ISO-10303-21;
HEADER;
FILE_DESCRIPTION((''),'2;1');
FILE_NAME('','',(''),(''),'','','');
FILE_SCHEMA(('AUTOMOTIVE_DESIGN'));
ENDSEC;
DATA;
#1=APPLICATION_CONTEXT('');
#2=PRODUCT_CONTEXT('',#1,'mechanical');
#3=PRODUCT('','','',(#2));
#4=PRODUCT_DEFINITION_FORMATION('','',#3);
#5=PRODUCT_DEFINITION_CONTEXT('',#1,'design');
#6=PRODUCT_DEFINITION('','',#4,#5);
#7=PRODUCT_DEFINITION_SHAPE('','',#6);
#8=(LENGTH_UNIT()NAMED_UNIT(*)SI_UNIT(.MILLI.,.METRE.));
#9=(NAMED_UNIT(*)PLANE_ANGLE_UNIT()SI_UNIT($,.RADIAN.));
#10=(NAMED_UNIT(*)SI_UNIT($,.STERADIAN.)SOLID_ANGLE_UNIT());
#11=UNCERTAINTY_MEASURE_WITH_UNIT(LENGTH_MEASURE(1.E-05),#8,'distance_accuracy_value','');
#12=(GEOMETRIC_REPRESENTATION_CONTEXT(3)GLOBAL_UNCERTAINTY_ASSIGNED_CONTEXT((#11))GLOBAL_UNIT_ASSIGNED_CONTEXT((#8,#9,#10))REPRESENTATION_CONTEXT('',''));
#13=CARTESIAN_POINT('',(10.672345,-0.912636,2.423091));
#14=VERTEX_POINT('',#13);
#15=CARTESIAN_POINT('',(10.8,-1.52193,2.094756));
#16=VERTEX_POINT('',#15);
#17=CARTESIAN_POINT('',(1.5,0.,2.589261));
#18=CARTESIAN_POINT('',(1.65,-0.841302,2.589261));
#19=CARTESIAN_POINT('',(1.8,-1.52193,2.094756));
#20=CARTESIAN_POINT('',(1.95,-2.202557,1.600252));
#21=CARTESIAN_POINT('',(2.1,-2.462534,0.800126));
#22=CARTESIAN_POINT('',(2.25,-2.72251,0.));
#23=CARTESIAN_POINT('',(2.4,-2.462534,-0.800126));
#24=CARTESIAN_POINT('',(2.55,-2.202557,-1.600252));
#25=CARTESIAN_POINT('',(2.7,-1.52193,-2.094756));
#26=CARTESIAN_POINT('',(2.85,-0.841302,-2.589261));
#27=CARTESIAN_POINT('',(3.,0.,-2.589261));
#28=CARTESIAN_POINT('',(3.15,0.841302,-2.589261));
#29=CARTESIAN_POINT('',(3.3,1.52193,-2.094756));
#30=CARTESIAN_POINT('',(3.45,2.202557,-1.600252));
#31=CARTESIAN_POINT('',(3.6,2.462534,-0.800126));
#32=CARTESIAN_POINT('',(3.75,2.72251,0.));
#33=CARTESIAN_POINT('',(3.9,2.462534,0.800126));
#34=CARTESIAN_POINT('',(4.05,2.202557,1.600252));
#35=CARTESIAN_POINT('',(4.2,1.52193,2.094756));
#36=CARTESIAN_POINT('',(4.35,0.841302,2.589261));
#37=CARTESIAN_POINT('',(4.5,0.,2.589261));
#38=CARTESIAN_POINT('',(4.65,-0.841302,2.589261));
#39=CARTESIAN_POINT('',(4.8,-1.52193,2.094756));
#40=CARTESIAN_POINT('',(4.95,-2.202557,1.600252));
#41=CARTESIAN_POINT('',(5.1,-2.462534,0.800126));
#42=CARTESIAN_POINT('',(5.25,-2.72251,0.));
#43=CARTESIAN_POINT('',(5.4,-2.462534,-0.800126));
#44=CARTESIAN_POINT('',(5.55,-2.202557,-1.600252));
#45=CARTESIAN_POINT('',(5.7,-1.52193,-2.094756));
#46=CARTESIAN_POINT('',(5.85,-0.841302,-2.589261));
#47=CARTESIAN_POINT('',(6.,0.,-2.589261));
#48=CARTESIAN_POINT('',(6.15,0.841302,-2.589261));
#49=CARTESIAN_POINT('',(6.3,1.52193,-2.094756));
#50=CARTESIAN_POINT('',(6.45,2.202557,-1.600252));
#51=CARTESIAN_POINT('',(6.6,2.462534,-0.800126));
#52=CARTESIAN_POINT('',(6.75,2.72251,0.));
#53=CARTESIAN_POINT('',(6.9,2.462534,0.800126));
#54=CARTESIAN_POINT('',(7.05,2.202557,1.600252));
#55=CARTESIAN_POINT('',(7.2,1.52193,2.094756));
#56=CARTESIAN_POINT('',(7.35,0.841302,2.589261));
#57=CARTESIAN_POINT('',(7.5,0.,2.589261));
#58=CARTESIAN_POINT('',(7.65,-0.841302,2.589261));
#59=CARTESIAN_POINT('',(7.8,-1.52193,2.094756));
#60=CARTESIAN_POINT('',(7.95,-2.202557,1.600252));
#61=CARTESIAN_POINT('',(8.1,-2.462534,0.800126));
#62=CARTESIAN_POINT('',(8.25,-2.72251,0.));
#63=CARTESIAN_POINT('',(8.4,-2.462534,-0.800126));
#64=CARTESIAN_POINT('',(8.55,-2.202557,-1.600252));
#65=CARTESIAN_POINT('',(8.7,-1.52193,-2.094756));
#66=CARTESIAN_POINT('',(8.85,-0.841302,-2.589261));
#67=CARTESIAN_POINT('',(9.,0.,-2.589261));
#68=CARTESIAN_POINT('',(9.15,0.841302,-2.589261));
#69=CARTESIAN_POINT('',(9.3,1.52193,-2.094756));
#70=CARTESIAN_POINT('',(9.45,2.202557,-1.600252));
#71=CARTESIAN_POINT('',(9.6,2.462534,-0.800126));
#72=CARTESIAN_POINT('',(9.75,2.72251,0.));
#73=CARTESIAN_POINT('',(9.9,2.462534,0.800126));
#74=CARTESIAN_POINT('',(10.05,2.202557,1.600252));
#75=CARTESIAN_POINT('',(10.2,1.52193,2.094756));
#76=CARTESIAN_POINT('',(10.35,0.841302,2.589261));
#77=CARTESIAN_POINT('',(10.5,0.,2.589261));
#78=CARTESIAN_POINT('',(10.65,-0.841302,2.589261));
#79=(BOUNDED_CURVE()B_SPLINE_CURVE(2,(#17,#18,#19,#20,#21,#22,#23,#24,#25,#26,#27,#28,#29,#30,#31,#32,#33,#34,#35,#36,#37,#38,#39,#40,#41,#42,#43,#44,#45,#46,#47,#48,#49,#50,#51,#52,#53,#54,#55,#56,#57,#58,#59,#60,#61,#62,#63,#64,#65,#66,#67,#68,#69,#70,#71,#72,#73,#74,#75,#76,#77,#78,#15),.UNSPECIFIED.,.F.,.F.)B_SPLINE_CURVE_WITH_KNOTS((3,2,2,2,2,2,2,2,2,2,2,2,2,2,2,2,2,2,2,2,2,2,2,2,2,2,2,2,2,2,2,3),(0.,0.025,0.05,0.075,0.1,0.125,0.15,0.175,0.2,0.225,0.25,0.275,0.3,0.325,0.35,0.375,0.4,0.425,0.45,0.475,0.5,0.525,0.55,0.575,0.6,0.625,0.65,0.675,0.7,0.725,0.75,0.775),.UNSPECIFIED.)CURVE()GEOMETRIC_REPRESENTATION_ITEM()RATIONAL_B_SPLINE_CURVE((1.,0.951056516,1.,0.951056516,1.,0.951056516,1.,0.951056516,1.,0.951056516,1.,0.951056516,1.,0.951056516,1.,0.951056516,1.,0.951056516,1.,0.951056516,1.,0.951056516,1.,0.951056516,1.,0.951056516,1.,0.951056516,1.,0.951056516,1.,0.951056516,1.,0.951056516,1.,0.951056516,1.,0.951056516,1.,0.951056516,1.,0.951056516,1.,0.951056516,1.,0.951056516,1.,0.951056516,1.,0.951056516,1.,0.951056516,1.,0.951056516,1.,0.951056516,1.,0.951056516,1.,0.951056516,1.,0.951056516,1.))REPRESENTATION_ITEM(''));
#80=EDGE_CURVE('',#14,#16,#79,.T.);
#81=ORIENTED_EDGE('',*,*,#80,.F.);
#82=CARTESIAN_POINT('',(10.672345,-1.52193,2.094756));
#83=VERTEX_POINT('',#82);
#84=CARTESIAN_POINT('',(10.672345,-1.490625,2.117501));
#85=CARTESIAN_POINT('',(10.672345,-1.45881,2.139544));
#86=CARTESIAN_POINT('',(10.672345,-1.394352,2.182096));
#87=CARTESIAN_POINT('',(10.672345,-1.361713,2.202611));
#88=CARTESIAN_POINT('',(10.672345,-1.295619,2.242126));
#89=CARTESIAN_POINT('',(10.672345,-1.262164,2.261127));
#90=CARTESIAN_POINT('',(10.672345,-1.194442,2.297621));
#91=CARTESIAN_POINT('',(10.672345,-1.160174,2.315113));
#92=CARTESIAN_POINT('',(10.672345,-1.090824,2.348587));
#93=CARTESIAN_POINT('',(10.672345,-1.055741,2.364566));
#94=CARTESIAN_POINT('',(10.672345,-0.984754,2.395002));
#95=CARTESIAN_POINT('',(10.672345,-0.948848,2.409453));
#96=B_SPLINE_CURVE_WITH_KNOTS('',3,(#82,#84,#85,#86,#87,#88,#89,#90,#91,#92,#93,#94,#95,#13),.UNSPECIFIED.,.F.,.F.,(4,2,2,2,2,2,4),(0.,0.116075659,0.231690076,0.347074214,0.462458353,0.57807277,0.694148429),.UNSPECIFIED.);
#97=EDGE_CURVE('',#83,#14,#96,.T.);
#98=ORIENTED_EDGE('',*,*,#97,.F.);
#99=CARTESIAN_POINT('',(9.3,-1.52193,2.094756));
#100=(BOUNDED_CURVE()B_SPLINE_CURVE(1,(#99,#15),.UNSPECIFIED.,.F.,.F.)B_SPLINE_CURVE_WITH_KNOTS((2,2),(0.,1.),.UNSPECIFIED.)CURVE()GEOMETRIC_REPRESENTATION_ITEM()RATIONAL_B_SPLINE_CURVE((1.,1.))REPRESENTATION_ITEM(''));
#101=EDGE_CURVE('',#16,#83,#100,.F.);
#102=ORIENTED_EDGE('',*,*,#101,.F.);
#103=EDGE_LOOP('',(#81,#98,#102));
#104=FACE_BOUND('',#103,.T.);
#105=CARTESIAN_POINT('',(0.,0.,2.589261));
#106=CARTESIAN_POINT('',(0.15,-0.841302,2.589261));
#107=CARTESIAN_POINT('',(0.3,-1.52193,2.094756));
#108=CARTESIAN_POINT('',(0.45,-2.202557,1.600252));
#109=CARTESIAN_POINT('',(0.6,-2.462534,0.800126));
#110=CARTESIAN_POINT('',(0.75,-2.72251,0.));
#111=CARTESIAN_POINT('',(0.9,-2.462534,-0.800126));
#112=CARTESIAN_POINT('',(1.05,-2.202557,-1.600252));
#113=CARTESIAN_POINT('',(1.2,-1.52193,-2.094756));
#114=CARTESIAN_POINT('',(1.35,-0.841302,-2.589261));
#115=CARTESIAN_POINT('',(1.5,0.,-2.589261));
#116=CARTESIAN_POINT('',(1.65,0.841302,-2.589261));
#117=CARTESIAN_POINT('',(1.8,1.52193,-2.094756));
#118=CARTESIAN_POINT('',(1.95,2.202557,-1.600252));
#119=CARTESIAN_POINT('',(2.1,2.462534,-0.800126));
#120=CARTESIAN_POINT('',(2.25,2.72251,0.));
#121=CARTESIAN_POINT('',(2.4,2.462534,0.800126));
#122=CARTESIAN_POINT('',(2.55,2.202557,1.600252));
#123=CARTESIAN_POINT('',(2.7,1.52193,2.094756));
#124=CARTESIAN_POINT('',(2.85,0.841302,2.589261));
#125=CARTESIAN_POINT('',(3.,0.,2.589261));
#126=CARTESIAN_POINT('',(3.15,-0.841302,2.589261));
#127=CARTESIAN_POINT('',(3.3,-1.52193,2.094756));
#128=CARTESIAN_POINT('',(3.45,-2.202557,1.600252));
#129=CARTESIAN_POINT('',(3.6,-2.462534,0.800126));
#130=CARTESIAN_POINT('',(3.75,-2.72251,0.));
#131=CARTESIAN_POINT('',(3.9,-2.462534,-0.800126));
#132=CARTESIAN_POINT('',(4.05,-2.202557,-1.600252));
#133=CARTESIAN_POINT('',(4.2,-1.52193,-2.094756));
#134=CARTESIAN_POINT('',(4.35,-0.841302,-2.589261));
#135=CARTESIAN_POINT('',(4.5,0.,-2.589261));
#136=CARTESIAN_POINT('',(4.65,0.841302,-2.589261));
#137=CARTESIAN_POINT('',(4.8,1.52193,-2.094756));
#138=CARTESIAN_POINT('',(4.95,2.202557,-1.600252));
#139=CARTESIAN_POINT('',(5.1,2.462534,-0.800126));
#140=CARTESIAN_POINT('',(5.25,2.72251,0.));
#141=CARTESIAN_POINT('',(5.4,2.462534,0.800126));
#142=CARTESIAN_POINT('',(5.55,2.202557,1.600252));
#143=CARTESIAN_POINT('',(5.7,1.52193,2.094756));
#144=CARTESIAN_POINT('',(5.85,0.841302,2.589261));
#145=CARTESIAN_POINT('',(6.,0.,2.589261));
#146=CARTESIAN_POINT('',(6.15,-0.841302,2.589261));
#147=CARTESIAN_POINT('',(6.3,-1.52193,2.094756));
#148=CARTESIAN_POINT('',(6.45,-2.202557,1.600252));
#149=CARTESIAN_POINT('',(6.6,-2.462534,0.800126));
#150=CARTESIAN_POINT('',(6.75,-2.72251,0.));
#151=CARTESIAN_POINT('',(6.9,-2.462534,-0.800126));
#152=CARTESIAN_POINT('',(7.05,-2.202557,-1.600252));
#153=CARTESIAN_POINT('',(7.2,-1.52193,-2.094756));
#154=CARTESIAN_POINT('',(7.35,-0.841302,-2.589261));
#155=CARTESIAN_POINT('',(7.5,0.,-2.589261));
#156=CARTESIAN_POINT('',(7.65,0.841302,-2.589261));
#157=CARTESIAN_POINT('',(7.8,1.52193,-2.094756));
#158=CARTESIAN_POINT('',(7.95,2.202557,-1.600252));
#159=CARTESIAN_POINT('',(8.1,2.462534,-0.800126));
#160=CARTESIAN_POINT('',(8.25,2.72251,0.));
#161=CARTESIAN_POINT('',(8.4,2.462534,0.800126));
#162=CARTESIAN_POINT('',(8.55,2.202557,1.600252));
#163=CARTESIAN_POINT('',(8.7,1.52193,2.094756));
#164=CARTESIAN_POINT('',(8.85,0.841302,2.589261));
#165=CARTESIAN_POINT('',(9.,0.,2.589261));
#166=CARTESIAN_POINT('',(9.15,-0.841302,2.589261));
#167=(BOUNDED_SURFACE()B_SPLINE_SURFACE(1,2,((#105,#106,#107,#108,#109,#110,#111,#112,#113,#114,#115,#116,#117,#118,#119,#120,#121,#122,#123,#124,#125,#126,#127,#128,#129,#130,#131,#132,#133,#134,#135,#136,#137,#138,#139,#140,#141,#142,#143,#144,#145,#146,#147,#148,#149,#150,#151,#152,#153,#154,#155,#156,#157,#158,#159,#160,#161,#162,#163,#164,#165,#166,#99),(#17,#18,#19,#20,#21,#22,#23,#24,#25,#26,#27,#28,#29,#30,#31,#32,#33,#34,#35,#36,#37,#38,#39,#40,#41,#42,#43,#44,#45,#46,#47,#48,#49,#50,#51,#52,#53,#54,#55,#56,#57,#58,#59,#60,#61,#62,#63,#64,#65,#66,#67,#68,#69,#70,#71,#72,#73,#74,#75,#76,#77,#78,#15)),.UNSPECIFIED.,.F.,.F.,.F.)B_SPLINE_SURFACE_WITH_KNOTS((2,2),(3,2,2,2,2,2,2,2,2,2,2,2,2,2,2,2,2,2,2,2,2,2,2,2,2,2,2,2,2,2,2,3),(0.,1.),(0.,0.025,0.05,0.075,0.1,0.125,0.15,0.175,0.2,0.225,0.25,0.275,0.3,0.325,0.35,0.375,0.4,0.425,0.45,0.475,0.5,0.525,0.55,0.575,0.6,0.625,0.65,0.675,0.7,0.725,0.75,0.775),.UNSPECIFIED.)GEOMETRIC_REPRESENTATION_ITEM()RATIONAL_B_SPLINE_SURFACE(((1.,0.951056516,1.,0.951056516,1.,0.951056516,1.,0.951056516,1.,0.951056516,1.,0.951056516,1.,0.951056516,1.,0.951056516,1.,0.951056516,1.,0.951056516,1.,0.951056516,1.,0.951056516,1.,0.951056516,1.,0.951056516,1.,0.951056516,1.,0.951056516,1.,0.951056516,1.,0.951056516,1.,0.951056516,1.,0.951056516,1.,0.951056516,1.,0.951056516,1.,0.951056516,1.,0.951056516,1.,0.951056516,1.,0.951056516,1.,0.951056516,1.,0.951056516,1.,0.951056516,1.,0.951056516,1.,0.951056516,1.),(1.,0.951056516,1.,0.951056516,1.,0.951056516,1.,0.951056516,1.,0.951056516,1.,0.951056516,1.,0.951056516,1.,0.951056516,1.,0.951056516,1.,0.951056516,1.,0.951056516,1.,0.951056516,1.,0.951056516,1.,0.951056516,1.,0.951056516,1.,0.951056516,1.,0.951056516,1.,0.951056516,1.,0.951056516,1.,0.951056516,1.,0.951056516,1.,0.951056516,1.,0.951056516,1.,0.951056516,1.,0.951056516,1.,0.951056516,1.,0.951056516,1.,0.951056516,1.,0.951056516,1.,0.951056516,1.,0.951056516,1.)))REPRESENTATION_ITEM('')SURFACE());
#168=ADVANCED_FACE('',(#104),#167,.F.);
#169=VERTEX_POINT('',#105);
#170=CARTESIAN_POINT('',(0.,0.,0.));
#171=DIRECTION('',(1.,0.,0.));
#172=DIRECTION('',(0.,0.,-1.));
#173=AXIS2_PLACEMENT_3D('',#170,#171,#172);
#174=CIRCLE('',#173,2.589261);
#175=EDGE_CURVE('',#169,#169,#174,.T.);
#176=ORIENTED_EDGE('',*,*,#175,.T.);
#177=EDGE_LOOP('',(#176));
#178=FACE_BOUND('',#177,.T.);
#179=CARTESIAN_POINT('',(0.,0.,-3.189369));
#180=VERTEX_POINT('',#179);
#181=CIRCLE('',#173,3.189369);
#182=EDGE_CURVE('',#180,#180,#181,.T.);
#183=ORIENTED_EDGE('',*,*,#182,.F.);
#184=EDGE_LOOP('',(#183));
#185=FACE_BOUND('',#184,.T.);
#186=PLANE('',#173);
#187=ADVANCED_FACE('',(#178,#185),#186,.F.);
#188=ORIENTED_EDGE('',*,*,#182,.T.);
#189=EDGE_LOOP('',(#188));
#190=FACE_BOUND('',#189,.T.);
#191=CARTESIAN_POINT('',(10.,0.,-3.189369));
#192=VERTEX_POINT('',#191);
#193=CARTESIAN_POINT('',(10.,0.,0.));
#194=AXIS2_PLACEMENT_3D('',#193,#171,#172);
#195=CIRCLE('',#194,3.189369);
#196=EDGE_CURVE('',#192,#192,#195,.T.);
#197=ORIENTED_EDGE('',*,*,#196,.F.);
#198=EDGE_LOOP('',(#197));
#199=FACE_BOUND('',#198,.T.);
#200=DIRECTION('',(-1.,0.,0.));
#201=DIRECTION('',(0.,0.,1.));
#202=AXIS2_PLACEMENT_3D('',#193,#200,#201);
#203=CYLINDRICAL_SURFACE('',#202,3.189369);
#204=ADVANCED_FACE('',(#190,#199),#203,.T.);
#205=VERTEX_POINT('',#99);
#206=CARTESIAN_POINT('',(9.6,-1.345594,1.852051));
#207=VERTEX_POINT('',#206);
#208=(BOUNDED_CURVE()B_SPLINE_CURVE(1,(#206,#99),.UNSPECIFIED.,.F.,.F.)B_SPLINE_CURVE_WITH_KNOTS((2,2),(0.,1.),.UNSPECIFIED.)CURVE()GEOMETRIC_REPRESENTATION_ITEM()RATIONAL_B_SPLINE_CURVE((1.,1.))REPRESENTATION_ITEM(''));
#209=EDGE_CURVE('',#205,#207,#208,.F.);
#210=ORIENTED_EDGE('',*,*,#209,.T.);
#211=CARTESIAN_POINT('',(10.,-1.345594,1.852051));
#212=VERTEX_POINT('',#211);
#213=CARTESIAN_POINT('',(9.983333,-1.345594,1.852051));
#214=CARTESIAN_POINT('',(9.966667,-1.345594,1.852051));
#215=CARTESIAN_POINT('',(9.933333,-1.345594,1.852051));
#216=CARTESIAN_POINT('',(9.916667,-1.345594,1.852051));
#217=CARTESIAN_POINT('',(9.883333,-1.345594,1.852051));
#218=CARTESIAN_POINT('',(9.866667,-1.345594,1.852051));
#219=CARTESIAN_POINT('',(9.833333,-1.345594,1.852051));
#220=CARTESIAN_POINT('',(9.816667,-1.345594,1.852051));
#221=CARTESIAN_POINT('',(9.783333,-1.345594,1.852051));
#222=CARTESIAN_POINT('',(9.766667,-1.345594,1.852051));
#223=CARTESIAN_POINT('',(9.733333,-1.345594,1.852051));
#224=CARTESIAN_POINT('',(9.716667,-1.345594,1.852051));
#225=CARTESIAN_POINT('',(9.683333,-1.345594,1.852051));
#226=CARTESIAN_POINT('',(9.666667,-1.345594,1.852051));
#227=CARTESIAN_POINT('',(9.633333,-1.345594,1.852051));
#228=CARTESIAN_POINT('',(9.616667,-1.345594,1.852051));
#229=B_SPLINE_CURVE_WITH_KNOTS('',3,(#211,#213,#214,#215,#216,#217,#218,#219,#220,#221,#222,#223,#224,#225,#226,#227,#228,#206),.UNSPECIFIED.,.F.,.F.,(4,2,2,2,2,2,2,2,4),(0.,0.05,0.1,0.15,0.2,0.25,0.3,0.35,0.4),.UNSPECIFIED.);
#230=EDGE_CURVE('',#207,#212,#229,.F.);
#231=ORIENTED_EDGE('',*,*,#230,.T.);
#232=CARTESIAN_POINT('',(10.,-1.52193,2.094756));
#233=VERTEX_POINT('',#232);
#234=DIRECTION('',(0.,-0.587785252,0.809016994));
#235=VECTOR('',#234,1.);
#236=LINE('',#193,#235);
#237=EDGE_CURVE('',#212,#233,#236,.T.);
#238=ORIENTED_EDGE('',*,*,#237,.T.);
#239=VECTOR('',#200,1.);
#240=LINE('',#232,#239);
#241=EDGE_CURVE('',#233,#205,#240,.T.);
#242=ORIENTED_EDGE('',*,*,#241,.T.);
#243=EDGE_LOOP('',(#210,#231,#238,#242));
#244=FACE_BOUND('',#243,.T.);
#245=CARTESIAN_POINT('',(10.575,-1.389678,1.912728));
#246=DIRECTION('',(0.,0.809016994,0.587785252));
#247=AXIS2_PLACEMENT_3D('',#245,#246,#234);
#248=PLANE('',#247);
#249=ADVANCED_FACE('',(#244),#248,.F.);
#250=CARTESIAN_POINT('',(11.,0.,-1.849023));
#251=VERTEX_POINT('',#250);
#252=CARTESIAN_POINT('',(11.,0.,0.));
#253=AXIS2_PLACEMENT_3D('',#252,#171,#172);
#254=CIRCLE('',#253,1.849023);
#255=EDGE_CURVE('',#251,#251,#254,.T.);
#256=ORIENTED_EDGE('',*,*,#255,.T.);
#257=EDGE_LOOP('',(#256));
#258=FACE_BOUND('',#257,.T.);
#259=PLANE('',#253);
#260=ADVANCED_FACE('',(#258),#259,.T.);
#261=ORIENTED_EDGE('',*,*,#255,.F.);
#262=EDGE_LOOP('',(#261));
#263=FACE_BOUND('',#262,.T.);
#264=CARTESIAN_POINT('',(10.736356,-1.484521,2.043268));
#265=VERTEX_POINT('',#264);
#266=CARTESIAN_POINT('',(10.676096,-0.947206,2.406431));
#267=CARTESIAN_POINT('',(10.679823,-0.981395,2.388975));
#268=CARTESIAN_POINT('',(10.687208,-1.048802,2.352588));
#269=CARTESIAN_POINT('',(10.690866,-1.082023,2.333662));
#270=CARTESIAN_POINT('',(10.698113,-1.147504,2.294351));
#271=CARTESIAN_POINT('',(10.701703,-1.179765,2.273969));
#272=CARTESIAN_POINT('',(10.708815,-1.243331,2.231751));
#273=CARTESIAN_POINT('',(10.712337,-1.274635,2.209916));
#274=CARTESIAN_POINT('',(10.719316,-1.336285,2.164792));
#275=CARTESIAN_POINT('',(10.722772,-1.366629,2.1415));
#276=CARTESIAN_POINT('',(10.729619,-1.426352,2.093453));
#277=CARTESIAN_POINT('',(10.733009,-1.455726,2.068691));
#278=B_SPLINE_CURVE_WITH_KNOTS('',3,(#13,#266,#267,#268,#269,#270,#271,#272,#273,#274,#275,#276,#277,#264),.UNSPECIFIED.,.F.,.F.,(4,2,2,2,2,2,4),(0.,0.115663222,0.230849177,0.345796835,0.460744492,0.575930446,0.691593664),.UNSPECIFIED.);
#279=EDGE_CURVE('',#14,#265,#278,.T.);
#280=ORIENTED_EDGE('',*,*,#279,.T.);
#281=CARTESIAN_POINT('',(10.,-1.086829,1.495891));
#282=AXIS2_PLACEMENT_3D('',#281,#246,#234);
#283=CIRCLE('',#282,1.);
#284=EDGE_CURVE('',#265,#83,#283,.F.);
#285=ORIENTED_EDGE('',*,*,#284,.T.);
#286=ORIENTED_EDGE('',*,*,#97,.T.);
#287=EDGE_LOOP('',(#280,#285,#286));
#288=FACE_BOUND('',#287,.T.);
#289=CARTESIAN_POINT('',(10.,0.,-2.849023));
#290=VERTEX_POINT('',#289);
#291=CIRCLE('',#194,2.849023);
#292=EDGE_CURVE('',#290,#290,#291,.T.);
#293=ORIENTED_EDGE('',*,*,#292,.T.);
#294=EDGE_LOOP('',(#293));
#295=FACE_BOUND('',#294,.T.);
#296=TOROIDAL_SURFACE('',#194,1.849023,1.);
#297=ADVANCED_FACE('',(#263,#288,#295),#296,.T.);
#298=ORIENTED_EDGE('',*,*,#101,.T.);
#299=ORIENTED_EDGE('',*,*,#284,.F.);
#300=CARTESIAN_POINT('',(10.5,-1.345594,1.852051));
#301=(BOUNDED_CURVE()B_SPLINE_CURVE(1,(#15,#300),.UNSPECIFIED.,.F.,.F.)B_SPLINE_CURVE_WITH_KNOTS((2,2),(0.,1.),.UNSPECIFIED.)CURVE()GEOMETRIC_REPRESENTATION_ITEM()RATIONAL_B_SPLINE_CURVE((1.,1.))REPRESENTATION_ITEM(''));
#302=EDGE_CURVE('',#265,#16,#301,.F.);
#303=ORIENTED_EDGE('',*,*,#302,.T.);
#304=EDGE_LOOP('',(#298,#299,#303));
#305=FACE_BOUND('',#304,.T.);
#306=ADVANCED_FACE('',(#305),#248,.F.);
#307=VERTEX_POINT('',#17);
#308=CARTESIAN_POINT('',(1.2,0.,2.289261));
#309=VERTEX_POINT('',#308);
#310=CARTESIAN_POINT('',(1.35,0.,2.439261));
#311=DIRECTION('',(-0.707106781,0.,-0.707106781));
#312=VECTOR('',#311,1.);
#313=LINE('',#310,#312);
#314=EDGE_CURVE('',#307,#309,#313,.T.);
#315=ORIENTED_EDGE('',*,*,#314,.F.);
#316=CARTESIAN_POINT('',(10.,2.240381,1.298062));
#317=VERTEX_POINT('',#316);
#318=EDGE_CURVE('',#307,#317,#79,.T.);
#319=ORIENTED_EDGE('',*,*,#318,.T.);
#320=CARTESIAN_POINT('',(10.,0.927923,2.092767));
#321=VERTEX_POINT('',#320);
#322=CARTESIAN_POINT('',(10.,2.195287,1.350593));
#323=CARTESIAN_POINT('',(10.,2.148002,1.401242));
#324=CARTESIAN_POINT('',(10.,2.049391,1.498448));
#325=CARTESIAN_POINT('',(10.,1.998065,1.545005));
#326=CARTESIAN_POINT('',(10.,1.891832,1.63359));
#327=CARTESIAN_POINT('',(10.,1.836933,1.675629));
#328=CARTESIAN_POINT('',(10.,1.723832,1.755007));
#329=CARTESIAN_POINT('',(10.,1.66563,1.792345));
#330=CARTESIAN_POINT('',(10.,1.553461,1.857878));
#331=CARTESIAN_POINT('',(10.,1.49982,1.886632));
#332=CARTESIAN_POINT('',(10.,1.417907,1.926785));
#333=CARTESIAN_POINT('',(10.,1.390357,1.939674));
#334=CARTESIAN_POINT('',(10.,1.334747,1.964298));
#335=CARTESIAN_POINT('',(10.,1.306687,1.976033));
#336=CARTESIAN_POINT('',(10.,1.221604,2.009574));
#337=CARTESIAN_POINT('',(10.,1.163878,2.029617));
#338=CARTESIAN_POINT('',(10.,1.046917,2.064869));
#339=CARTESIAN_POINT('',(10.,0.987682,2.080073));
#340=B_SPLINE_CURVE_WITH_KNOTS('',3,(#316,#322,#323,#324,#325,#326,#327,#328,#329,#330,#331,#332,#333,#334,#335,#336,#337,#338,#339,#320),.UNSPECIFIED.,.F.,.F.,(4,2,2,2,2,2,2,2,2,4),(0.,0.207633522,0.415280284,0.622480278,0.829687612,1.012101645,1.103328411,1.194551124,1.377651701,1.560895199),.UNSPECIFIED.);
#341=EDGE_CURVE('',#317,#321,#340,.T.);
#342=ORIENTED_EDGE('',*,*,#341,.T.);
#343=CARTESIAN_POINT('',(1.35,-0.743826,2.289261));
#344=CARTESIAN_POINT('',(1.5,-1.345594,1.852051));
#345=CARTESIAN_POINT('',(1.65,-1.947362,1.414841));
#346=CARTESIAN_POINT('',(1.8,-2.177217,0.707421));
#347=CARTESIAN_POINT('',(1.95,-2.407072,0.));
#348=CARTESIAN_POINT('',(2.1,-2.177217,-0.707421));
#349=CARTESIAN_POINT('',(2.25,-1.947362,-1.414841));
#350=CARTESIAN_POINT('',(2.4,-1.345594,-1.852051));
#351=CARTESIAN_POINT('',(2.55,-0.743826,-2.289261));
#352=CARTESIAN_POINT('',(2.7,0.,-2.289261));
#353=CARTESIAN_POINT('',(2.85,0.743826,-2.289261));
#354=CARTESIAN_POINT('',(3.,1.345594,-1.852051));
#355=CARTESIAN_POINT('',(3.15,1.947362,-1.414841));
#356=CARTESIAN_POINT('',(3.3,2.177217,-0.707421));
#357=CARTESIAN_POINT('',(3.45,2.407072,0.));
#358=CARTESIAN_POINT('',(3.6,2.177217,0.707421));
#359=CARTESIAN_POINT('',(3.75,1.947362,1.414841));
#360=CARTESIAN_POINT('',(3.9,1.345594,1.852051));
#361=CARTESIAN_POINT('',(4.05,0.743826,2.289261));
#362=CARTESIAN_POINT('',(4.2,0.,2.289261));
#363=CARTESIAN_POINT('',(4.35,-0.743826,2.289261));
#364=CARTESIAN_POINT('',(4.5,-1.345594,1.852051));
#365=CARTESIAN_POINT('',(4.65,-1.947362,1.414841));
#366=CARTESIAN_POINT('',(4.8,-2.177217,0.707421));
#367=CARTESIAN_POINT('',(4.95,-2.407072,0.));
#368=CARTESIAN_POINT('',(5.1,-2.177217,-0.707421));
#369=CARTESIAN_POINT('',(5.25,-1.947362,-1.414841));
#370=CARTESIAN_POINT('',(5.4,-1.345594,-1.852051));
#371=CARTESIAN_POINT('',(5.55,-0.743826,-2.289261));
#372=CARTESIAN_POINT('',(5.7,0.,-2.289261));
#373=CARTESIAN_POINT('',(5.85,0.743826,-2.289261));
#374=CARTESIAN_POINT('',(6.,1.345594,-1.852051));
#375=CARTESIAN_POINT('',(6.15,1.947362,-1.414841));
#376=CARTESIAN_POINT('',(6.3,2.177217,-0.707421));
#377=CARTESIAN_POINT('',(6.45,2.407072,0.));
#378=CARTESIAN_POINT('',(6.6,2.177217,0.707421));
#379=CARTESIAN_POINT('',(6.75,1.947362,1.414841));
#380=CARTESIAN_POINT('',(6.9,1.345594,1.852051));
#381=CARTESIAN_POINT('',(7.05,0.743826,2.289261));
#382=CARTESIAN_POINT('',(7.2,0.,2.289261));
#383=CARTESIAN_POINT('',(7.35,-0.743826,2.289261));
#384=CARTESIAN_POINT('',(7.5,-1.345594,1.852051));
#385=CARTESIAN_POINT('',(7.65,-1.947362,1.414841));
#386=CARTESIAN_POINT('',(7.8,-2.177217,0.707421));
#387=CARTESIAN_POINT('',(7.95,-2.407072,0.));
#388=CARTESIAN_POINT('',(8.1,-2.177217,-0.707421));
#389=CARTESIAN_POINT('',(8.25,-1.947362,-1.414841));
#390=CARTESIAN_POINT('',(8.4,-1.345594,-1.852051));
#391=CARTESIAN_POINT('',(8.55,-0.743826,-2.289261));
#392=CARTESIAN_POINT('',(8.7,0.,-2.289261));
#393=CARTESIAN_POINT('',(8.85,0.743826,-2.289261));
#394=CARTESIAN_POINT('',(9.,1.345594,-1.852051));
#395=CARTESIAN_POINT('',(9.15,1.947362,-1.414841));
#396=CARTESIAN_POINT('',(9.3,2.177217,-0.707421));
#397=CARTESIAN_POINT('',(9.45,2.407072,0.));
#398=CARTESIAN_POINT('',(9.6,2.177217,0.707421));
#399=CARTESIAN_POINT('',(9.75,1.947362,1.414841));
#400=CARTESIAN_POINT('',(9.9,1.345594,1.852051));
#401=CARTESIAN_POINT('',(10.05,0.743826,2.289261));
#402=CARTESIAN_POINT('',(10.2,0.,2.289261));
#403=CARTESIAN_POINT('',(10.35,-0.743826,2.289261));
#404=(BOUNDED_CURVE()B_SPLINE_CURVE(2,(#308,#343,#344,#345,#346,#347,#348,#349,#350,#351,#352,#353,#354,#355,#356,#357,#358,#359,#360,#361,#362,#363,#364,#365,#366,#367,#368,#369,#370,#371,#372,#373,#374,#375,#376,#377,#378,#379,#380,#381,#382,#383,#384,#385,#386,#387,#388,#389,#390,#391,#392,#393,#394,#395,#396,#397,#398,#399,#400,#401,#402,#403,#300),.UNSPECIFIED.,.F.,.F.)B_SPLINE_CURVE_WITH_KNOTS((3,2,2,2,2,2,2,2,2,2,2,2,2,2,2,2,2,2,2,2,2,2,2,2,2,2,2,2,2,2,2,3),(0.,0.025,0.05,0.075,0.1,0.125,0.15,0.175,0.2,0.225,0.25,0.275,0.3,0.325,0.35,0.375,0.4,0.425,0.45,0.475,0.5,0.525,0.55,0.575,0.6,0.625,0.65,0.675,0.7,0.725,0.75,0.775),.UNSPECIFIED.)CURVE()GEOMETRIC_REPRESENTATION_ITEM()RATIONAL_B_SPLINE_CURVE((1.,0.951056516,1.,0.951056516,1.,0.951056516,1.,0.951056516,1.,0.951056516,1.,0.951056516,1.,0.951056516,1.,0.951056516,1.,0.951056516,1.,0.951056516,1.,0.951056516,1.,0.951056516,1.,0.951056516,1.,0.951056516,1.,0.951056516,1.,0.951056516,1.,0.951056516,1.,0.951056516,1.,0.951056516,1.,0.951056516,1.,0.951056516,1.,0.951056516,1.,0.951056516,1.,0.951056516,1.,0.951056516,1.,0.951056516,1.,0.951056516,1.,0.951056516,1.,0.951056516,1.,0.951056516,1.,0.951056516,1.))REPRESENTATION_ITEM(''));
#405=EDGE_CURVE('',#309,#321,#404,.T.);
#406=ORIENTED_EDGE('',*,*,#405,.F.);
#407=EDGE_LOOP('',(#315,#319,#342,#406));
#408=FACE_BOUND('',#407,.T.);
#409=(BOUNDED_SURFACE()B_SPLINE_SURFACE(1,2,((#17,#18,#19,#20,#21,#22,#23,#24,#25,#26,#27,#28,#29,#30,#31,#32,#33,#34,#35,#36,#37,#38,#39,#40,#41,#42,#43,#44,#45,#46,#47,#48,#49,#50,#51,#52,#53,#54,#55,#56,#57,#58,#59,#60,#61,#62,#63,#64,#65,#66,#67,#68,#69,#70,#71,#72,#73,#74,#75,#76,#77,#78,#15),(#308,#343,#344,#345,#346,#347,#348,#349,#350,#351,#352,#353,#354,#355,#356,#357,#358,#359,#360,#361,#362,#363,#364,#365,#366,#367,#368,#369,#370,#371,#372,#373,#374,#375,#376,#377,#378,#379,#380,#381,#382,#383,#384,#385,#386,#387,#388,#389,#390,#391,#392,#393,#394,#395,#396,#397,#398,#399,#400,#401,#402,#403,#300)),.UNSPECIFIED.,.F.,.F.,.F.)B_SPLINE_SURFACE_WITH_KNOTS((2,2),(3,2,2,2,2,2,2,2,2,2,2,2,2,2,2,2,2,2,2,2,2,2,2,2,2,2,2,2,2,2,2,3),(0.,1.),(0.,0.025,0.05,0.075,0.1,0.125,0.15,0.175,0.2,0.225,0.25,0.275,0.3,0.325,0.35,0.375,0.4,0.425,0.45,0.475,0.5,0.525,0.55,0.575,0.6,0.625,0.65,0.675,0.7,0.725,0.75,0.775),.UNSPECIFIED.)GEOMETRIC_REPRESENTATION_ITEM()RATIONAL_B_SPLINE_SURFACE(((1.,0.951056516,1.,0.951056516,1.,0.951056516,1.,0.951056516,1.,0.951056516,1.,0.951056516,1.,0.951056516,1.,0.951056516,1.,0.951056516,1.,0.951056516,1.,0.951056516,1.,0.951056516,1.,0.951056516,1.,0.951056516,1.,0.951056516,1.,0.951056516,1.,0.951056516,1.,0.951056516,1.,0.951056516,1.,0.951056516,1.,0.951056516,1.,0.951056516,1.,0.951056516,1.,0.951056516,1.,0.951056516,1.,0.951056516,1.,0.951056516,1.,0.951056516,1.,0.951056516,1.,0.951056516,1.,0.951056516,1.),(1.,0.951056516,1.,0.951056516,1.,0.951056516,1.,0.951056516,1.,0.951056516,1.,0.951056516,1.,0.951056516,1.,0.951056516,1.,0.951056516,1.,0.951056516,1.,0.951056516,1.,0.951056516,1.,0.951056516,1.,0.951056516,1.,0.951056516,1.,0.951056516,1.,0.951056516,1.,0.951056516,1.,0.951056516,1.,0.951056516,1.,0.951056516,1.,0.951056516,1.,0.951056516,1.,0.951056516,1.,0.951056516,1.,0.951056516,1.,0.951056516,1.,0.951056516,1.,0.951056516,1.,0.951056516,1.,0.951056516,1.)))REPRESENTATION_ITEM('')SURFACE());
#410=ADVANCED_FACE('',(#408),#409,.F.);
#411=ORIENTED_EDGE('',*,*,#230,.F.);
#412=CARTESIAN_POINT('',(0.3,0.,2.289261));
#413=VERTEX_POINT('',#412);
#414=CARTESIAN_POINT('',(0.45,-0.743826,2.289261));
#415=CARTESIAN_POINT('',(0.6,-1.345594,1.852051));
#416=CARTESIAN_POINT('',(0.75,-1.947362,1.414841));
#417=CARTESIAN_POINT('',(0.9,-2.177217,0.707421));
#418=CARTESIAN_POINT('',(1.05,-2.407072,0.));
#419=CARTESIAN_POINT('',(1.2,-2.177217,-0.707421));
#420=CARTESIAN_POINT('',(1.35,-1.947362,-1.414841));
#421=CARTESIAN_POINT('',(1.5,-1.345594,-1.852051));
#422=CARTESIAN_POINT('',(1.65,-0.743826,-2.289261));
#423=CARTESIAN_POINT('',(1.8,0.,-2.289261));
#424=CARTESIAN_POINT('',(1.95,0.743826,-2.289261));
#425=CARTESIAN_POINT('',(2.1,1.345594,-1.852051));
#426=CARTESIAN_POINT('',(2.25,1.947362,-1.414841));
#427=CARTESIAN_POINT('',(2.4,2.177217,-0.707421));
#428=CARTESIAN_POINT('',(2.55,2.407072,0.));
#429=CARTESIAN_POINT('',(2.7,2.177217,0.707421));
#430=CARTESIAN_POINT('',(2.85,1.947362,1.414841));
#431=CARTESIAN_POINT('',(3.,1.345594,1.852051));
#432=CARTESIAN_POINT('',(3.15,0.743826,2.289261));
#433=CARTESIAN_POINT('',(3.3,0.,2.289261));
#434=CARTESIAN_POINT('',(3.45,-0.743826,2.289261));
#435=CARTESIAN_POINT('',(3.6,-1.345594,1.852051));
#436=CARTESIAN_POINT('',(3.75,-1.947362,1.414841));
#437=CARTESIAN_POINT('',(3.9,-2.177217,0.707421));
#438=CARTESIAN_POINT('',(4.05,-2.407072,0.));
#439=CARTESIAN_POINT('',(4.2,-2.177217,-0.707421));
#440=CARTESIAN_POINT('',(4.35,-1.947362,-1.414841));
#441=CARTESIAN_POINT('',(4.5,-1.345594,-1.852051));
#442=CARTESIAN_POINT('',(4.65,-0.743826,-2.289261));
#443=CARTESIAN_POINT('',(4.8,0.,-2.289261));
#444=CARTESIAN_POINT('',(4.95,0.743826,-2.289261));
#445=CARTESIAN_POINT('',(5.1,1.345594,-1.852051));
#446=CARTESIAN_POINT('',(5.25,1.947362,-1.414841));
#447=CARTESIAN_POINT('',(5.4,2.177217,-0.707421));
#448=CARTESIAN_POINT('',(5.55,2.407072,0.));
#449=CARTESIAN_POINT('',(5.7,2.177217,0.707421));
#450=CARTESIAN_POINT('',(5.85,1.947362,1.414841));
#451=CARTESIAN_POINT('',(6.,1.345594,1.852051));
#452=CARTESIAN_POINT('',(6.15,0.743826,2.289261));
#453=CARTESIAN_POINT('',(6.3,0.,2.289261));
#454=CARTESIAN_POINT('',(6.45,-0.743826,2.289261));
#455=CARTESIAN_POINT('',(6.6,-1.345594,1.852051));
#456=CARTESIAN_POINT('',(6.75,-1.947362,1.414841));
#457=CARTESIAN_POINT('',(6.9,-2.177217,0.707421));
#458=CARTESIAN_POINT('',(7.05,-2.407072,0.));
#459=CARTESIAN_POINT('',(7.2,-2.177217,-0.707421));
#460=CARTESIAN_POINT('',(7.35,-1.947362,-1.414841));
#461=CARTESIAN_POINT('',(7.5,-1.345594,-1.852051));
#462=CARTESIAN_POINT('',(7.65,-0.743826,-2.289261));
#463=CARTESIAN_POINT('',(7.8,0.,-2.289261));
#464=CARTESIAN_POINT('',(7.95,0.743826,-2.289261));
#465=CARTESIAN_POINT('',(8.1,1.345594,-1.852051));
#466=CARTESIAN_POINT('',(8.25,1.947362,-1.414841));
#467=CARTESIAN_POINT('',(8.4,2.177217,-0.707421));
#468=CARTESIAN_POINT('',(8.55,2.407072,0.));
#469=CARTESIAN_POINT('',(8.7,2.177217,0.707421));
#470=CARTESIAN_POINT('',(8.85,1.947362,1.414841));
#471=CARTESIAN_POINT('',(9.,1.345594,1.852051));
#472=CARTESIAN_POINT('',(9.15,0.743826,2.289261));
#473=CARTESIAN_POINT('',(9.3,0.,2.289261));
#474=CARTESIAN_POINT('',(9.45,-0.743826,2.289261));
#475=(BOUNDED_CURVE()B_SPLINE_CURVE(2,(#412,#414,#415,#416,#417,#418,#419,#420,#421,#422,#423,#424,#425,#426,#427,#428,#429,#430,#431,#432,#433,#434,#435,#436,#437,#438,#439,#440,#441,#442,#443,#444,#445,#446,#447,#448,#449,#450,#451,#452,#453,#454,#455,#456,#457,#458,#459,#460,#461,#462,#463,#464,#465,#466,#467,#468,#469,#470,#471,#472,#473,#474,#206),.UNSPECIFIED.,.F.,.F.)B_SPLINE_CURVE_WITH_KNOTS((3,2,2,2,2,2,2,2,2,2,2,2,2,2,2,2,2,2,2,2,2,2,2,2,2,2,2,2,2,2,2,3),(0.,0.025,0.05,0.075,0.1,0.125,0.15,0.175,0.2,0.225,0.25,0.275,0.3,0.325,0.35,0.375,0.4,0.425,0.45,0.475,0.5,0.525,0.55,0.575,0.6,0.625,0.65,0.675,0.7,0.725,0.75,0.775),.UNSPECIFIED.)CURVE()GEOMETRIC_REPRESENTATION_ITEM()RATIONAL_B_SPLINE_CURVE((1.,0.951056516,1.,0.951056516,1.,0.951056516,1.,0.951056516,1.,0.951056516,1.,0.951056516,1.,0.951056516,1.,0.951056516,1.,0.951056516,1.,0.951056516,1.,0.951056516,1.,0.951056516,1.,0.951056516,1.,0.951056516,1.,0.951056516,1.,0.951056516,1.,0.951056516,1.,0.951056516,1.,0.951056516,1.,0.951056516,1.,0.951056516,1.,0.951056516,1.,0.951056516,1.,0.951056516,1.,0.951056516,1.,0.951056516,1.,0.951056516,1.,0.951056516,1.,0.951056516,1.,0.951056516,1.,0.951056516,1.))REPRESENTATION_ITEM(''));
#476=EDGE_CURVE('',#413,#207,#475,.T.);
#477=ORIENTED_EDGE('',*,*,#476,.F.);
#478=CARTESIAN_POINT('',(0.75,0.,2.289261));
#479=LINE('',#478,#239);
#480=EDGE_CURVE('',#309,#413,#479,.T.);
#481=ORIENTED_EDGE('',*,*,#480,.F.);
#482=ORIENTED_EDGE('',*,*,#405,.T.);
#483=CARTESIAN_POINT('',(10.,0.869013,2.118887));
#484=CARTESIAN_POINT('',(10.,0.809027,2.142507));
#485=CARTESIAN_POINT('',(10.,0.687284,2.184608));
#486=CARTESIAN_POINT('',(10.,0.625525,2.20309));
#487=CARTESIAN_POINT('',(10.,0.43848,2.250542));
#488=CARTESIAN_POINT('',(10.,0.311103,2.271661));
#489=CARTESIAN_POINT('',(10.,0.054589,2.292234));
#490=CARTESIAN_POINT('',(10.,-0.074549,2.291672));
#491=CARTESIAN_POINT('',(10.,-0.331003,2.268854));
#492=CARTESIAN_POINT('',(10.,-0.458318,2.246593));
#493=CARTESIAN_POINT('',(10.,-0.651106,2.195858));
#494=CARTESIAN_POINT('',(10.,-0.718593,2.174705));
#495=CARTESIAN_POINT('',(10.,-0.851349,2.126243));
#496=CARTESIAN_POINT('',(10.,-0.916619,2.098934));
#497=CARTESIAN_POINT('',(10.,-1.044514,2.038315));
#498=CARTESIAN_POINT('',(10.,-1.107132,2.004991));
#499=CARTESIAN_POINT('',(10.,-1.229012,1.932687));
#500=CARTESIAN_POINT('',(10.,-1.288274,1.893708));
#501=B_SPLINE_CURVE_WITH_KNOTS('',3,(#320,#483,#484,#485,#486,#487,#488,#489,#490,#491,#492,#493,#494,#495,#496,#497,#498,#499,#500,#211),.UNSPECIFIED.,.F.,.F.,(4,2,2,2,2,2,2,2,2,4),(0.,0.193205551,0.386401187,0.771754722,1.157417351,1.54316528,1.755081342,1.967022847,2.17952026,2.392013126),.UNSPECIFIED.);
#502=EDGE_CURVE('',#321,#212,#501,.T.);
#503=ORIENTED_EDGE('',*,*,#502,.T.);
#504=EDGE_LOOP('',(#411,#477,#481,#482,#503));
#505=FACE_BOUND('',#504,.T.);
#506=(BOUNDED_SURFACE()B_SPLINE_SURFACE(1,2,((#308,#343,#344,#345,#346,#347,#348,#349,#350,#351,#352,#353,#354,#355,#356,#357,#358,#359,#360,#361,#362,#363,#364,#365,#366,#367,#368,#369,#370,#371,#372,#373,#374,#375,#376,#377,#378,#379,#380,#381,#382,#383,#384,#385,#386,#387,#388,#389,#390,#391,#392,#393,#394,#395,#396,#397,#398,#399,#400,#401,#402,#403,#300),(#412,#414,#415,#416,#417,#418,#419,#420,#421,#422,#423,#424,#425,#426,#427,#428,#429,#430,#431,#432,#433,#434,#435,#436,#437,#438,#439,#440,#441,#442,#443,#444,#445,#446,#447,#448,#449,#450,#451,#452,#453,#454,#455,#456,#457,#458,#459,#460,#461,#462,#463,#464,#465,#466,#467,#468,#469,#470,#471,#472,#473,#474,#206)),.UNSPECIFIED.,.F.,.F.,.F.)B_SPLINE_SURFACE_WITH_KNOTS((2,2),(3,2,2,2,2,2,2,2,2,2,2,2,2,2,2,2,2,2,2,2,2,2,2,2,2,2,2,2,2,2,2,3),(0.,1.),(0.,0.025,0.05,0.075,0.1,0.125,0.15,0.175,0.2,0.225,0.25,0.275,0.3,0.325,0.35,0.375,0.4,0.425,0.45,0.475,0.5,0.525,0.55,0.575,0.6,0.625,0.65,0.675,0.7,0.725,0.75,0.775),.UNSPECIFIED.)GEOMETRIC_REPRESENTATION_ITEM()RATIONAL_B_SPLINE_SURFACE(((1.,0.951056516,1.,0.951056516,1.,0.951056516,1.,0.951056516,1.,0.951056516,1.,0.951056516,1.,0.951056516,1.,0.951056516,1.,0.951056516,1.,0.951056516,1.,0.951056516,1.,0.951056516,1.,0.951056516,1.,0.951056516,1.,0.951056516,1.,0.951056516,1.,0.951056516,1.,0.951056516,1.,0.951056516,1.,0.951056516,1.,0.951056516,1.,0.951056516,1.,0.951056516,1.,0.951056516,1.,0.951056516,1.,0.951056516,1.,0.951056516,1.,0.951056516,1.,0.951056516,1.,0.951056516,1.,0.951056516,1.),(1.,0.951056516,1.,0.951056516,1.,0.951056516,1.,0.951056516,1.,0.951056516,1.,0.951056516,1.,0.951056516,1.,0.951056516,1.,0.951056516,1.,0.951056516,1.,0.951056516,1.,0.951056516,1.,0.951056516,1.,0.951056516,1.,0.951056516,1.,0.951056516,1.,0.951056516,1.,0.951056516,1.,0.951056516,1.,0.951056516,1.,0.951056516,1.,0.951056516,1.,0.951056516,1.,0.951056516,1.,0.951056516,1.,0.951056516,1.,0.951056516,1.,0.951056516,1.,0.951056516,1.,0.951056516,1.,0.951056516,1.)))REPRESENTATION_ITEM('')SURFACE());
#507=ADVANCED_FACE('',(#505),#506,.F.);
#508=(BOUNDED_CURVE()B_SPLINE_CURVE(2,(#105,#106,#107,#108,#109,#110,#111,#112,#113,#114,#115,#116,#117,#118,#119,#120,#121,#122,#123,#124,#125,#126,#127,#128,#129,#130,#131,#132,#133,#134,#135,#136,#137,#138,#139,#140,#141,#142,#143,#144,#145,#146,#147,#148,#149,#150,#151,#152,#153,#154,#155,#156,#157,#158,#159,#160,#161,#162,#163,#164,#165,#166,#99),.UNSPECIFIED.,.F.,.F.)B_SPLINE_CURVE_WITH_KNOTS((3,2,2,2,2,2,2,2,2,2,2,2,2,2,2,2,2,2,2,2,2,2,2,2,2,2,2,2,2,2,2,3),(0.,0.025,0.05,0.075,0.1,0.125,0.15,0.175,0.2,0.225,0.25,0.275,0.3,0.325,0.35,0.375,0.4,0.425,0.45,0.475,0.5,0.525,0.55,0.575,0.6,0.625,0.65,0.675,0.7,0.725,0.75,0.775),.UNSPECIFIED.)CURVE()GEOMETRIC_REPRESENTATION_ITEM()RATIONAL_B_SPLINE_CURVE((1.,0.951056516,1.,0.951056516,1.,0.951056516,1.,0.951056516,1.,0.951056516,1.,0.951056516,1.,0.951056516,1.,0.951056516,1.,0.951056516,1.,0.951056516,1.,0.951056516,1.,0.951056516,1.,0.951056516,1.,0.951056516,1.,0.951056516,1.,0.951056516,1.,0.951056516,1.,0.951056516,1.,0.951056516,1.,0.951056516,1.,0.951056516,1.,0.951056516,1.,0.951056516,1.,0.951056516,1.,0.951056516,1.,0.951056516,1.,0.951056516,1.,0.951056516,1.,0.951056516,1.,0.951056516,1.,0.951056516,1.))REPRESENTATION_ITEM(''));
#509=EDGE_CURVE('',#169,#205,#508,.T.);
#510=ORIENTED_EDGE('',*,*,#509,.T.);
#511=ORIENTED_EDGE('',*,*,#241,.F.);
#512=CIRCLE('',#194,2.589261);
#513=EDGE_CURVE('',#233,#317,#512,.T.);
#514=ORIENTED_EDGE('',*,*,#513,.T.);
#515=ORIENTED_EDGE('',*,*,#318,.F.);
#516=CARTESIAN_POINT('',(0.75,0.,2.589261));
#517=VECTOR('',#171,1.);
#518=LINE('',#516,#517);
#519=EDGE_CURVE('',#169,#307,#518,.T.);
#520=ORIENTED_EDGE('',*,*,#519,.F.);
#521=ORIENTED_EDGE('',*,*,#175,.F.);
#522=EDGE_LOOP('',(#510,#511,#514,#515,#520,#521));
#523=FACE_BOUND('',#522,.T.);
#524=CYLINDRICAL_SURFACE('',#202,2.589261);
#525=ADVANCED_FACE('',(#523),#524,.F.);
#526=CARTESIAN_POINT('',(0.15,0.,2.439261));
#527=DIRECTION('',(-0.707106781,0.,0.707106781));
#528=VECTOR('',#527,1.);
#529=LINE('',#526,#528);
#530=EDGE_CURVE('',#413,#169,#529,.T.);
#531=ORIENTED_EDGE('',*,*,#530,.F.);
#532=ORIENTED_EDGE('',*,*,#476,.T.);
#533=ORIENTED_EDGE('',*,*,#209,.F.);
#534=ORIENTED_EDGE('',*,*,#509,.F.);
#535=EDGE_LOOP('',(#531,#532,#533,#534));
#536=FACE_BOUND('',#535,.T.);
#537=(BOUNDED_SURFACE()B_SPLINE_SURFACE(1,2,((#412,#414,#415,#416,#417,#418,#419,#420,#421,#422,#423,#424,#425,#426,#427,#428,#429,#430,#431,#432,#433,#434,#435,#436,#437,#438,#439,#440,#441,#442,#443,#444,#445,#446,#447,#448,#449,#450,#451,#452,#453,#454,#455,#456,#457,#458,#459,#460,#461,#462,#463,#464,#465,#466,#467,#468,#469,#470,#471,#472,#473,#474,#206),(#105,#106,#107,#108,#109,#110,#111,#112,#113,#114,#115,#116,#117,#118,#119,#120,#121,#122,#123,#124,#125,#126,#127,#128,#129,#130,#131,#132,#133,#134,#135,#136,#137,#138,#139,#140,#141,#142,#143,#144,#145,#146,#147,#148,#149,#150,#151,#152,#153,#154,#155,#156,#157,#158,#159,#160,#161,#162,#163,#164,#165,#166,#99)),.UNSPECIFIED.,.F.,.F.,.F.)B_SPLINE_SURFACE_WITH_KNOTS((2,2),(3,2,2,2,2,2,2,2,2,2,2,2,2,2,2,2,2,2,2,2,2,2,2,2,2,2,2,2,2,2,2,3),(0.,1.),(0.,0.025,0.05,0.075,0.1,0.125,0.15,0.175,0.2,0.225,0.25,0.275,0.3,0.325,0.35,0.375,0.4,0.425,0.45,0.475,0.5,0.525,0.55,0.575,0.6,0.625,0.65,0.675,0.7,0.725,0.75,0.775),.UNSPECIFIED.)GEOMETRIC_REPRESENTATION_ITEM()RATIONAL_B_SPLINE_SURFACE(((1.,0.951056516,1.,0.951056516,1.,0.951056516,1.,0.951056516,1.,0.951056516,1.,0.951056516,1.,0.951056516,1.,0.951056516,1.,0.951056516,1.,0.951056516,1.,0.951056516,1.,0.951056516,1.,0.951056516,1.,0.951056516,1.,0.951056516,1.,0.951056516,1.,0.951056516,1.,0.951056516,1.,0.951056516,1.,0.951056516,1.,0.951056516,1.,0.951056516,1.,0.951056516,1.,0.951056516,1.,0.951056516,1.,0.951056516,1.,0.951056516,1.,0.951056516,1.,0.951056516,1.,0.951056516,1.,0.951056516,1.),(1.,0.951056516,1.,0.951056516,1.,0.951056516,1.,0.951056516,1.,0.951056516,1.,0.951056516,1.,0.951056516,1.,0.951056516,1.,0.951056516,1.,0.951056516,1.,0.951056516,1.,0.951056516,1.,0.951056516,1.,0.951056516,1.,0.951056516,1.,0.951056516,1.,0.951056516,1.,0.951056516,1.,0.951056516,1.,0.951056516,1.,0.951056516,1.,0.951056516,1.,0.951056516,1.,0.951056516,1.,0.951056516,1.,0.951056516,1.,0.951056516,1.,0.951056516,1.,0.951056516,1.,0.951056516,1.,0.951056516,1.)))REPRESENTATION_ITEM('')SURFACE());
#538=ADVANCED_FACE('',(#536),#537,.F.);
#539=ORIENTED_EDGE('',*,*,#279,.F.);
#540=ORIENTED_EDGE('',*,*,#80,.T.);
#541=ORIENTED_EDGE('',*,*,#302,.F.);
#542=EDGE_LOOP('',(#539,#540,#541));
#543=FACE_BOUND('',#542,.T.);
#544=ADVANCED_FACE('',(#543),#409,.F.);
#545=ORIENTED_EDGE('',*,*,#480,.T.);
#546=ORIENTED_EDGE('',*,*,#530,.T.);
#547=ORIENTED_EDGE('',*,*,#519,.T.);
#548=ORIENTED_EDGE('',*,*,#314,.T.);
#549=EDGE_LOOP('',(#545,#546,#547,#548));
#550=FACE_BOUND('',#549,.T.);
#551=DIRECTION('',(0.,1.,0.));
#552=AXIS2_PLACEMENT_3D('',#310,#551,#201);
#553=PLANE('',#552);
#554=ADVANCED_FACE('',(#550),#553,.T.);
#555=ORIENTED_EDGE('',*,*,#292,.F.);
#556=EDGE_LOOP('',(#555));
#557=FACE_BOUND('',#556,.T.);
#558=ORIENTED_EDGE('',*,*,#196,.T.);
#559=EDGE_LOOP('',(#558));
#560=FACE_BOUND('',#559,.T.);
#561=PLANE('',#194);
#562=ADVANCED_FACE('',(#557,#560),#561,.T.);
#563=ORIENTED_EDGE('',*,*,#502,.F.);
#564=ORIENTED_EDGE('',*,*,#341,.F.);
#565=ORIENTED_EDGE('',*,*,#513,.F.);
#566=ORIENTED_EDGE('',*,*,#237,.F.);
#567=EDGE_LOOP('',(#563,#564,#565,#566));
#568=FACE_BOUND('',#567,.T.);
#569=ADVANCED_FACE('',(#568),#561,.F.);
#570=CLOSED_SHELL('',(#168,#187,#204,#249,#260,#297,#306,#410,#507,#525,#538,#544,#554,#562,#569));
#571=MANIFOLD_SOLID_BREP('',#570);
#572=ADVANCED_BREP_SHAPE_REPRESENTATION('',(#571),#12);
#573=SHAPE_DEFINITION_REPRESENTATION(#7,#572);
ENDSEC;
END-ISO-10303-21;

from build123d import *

# Parameters (mm, degrees)
SKETCH2_R           = 3.189369039
SKETCH2_R_2         = 2.589261351
BOSS_EXTRUDE1_DEPTH = 10
SKETCH3_R           = 2.849023425
BOSS_EXTRUDE2_DEPTH = 1
FILLET1_R           = 1
SWEEP1_PITCH        = 3


with BuildPart() as part:
    # Sketch2 → Boss-Extrude1 (new body)
    with BuildSketch(Plane(origin=(0, 0, 0), x_dir=(0, 0, -1), z_dir=(1, 0, 0))):
        Circle(SKETCH2_R)
        Circle(SKETCH2_R_2, mode=Mode.SUBTRACT)
    extrude(amount=BOSS_EXTRUDE1_DEPTH)

    # Sketch3 → Boss-Extrude2 (add)
    with BuildSketch(Plane(origin=(10, 0, 0), x_dir=(0, 0, -1), z_dir=(1, 0, 0))):
        Circle(SKETCH3_R)
    extrude(amount=BOSS_EXTRUDE2_DEPTH)

    # Fillet1
    fillet1_edges = [part.edges().sort_by_distance(p)[0] for p in [
        (11, 0, 2.849023425),
    ]]
    fillet(fillet1_edges, radius=FILLET1_R - 0.0001)  # a hair under: the kernel refuses the full size

    # Sweep1: the profile of Sketch7 profile screwed along a right-hand helix of 3.1 turns, 10 arcs to a turn; built about Z, then put on its axis
    sweep1_z = Axis((0, 0, 0), (0, 0, 1))
    sweep1_corners = [(2.589561351, 0, -0.0003), (2.589561351, 0, 1.5003), (2.289261351, 0, 1.2), (2.289261351, 0, 0.3)]
    with BuildLine(mode=Mode.PRIVATE) as sweep1_profile:
        Line(sweep1_corners[0], sweep1_corners[1])
        Line(sweep1_corners[1], sweep1_corners[2])
        Line(sweep1_corners[2], sweep1_corners[3])
        Line(sweep1_corners[3], sweep1_corners[0])
    sweep1_cap = Face(sweep1_profile.wire())
    sweep1_turn_angles = [0, 18, 36, 54, 72, 90, 108, 126, 144, 162, 180, 198, 216, 234, 252, 270, 288, 306, 324, 342, 360]
    sweep1_turn_weights = [1, 0.9510565162951535, 1, 0.9510565162951535, 1, 0.9510565162951535, 1, 0.9510565162951535, 1, 0.9510565162951535, 1, 0.9510565162951535, 1, 0.9510565162951535, 1, 0.9510565162951535, 1, 0.9510565162951535, 1, 0.9510565162951535, 1]
    sweep1_turn_rails = [Edge.make_bspline([Vector(p[0], p[1], 0).rotate(sweep1_z, sweep1_turn_angles[k]) / sweep1_turn_weights[k] + Vector(0, 0, p[2] + SWEEP1_PITCH * sweep1_turn_angles[k] / 360) for k in range(21)], [0, 0, 0, 1, 1, 2, 2, 3, 3, 4, 4, 5, 5, 6, 6, 7, 7, 8, 8, 9, 9, 10, 10, 10], 2, sweep1_turn_weights) for p in sweep1_corners]
    sweep1_turn_sides = [Face.make_surface_from_curves(sweep1_turn_rails[p[0]], sweep1_turn_rails[p[1]]) for p in [(0, 1), (1, 2), (2, 3), (3, 0)]]
    sweep1_last_angles = [1080, 1098, 1116]
    sweep1_last_weights = [1, 0.9510565162951499, 1]
    sweep1_last_rails = [Edge.make_bspline([Vector(p[0], p[1], 0).rotate(sweep1_z, sweep1_last_angles[k]) / sweep1_last_weights[k] + Vector(0, 0, p[2] + SWEEP1_PITCH * sweep1_last_angles[k] / 360) for k in range(3)], [0, 0, 0, 1, 1, 1], 2, sweep1_last_weights) for p in sweep1_corners]
    sweep1_last_sides = [Face.make_surface_from_curves(sweep1_last_rails[p[0]], sweep1_last_rails[p[1]]) for p in [(0, 1), (1, 2), (2, 3), (3, 0)]]
    sweep1 = Plane(origin=(0, 0, 0), x_dir=(0, 0, 1), z_dir=(1, 0, 0)) * Solid(Shell([*[p.moved(Location((0, 0, SWEEP1_PITCH * i))) for i in range(3) for p in sweep1_turn_sides], *sweep1_last_sides, sweep1_cap, sweep1_cap.rotate(sweep1_z, 1116).moved(Location((0, 0, SWEEP1_PITCH * 1116 / 360)))]))
    add(sweep1)


solid = part.part
